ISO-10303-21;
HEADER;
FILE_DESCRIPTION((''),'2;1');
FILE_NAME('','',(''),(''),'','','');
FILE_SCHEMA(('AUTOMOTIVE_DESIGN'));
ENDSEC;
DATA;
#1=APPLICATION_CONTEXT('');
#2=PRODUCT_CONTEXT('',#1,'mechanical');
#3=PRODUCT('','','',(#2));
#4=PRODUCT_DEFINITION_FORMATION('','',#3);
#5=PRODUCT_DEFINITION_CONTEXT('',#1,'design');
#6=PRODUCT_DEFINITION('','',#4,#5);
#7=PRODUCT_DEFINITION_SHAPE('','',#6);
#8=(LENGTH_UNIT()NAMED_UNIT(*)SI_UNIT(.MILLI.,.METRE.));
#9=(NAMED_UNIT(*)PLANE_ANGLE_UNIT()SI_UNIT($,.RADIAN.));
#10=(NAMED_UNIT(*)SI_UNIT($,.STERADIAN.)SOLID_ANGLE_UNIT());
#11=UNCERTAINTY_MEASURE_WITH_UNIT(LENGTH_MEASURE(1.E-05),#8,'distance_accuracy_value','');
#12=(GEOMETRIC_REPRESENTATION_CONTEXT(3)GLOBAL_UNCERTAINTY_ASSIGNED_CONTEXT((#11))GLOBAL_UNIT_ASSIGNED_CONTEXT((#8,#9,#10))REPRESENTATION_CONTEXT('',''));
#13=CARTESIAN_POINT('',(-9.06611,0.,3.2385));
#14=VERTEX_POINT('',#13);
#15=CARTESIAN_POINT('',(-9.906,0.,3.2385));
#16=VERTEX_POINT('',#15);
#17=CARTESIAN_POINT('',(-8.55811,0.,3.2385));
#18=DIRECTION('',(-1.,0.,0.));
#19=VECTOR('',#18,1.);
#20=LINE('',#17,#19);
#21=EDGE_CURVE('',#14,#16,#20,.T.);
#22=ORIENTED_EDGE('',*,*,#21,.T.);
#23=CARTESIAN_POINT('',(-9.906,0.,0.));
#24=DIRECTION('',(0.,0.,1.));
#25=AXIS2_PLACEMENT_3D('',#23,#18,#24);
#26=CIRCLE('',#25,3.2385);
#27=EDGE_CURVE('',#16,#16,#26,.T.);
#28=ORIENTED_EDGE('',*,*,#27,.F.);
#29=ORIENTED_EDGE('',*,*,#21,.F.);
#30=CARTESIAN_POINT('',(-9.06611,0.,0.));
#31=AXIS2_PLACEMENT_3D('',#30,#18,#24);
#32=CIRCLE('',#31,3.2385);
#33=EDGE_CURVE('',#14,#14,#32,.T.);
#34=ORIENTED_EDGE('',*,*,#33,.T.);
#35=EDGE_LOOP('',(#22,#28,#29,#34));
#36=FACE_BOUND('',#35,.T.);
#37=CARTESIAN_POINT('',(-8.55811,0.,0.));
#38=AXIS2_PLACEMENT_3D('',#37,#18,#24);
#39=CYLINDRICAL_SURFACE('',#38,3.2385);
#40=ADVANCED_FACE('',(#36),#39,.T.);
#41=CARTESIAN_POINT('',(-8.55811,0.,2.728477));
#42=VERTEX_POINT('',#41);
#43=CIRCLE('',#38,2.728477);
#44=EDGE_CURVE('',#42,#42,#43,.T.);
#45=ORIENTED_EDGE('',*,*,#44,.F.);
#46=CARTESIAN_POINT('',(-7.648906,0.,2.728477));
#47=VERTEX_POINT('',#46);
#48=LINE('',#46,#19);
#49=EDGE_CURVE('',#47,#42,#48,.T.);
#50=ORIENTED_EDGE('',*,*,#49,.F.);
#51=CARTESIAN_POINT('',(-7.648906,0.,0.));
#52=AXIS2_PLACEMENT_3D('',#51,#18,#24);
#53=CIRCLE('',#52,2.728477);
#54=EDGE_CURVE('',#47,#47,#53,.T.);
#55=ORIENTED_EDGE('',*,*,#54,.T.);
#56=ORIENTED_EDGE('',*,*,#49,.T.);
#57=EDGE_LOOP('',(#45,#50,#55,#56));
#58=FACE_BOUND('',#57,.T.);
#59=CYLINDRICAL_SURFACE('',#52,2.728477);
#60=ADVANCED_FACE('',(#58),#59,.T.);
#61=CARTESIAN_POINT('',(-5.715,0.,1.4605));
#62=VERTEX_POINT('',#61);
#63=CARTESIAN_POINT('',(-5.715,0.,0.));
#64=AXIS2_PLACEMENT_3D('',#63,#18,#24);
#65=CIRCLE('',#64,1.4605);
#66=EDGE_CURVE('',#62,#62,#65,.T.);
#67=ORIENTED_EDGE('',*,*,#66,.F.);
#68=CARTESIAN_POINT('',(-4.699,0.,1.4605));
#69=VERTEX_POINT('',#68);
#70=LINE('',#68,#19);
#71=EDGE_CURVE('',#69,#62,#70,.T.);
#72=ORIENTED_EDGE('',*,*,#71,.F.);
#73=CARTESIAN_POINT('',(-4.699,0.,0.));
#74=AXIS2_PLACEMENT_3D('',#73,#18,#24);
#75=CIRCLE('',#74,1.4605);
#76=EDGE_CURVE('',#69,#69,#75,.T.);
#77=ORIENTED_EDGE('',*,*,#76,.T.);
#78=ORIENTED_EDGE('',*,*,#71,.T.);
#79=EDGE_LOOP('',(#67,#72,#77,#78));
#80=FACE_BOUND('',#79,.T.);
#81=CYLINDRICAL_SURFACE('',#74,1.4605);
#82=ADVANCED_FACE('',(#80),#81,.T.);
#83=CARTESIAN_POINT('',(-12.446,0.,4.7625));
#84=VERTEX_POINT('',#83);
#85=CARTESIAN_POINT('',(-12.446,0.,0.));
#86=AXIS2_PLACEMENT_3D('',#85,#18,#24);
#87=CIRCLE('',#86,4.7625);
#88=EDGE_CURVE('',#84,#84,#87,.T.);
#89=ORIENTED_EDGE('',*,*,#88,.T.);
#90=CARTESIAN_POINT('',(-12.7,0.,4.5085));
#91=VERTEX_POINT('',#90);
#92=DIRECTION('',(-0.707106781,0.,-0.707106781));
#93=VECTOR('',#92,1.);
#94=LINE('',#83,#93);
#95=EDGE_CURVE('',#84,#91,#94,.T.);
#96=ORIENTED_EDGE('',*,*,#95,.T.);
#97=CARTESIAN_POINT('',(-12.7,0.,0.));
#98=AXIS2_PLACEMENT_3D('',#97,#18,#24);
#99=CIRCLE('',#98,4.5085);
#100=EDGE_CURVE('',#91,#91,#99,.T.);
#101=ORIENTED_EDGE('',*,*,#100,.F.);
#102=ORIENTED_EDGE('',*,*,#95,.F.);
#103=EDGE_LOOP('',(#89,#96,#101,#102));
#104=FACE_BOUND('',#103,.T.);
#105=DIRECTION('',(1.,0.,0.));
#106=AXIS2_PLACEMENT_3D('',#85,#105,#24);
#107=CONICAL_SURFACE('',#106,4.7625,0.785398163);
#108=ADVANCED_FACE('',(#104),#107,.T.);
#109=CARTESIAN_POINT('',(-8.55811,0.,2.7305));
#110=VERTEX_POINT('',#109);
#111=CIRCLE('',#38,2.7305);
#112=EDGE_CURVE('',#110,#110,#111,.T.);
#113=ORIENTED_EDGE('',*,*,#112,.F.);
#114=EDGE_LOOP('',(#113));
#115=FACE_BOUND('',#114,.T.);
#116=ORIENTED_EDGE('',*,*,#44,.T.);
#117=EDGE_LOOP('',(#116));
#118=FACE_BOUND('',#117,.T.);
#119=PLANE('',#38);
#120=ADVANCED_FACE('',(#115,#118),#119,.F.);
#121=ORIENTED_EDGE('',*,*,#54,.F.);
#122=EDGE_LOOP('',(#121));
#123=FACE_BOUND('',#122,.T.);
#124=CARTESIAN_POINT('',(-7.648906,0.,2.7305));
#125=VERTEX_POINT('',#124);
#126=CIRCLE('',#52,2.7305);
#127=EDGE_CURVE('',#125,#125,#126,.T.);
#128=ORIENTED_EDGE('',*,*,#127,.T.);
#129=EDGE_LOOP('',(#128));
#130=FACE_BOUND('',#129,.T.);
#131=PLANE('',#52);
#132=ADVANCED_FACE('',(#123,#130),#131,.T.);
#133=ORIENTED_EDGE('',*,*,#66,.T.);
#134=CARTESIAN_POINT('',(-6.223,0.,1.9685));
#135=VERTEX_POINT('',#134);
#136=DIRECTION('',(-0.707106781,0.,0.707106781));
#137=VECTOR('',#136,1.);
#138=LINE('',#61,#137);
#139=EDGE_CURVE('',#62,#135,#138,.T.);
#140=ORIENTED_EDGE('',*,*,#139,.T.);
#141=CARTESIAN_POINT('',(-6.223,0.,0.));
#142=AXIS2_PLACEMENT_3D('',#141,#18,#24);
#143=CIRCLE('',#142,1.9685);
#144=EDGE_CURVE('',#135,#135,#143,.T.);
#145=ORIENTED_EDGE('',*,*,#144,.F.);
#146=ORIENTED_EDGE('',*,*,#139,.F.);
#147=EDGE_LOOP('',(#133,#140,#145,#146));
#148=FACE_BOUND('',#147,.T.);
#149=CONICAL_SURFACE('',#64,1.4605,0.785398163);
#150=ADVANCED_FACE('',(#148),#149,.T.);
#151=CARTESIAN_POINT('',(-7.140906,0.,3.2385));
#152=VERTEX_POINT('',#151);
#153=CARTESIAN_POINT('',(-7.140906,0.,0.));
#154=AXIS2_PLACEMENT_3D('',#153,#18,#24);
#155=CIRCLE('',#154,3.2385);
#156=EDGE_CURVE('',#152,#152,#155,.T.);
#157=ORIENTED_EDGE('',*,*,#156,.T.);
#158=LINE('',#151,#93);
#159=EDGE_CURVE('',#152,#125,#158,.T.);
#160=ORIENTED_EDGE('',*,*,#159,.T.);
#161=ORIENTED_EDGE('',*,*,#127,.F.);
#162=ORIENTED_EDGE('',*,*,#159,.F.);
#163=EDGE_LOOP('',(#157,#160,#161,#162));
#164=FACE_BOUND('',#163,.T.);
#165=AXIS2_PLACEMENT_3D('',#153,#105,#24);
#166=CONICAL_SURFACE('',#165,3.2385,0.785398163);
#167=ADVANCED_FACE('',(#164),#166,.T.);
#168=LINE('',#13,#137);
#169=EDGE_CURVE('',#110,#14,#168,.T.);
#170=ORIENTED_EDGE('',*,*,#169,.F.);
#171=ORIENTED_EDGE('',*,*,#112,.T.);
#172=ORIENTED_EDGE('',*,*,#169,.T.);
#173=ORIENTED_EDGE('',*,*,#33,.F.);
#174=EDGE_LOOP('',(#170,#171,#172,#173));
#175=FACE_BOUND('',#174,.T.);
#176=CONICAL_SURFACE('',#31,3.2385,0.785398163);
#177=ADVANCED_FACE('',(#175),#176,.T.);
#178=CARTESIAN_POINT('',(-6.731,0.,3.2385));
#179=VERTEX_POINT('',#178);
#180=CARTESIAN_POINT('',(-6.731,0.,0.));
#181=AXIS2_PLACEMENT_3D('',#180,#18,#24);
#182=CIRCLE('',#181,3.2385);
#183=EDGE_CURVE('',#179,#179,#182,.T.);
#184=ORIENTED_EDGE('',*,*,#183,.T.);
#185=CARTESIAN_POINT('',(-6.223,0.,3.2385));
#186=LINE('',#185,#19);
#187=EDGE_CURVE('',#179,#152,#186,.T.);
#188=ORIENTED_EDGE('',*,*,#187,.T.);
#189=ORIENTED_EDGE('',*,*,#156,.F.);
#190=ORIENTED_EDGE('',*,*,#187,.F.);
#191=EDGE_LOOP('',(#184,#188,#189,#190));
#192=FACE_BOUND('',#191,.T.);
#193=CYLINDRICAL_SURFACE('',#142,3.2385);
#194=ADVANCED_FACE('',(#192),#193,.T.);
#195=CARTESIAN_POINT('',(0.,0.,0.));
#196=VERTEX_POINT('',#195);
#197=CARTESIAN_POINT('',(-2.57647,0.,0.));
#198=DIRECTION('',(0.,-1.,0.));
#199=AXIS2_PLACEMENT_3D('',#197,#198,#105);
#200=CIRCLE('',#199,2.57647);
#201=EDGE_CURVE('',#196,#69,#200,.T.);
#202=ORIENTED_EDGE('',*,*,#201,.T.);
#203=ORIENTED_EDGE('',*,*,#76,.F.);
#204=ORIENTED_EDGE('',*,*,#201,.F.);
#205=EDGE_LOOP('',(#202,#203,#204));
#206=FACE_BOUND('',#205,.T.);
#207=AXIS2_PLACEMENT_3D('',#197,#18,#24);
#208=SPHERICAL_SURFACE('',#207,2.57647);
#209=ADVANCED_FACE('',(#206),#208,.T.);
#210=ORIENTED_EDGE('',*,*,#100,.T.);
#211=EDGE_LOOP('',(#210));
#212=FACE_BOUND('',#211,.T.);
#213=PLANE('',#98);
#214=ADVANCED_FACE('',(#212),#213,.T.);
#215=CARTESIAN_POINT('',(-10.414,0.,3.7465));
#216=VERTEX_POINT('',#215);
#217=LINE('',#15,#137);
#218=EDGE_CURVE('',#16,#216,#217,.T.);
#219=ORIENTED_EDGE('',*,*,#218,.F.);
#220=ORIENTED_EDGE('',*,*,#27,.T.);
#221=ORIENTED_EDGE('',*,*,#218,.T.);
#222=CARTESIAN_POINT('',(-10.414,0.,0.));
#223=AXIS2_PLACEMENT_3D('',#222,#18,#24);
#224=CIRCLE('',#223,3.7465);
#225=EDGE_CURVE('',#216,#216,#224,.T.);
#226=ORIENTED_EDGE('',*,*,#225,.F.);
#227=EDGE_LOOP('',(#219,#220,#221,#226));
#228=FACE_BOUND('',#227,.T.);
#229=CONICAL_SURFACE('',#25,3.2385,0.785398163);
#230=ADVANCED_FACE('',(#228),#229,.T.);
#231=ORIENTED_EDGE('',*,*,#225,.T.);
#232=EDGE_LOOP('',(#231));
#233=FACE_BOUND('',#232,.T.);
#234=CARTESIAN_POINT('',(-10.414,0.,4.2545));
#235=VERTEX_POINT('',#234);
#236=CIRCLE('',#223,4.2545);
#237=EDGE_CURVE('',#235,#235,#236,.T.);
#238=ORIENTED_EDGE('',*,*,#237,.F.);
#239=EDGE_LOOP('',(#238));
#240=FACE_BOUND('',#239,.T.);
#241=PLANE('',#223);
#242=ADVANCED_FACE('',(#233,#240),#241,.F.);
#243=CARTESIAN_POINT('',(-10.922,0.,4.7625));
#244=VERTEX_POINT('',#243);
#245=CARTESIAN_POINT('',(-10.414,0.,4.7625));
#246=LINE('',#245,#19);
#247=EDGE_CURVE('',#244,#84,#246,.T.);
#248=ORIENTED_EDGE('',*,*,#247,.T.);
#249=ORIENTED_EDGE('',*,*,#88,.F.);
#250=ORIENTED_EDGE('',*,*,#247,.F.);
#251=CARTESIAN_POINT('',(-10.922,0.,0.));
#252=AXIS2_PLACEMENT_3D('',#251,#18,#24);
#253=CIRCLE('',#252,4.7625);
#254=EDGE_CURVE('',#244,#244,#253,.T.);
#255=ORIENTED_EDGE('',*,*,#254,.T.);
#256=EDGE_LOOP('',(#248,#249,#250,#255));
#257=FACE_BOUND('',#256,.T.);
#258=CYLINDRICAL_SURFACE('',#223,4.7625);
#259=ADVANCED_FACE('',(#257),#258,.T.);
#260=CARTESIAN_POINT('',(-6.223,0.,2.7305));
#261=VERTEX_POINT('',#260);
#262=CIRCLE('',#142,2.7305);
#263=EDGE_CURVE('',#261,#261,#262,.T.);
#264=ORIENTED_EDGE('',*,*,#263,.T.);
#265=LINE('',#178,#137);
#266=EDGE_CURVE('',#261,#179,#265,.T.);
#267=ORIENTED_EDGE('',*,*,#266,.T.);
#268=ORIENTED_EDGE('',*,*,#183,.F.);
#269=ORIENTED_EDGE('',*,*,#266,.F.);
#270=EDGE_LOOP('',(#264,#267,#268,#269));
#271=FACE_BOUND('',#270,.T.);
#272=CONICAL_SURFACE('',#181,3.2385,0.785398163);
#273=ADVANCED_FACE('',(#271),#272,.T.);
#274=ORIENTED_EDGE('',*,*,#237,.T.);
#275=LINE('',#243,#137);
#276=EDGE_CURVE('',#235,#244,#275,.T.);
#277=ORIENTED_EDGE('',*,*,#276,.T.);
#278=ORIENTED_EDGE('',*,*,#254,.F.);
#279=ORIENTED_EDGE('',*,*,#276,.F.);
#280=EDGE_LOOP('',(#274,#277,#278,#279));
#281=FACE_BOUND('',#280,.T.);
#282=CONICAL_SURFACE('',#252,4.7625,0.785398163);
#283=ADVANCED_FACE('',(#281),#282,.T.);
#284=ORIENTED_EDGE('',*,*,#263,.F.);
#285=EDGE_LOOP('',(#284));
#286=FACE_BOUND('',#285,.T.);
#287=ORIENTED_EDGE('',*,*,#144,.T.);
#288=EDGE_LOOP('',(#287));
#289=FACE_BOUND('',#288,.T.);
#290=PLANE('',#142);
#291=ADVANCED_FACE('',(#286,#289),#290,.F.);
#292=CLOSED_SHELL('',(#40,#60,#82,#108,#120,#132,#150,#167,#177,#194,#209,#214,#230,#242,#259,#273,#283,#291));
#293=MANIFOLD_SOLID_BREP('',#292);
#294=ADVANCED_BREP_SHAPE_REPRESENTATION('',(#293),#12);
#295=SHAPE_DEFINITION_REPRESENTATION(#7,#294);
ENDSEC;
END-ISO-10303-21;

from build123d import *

# Parameters (mm, degrees)
F2_SIZE = 0.508
F3_SIZE = 0.254


with BuildPart() as f1:
    # F0 (on Front) → F1 (revolve)
    with BuildSketch(Plane.XZ):
        with BuildLine():
            Line((-12.7, 0), (0, 0))
            ThreePointArc((0, 0), (-1.81176033, 2.4603689383), (-4.699, 1.4605))
            Line((-4.699, 1.4605), (-6.223, 1.4605))
            Line((-6.223, 1.4605), (-6.223, 3.2385))
            Line((-6.223, 3.2385), (-7.6489057392, 3.2385))
            Line((-7.6489057392, 3.2385), (-7.6489057392, 2.7284773532))
            Line((-7.6489057392, 2.7284773532), (-8.558110334, 2.7284773532))
            Line((-8.558110334, 2.7284773532), (-8.558110334, 3.2385))
            Line((-8.558110334, 3.2385), (-10.414, 3.2385))
            Line((-10.414, 3.2385), (-10.414, 4.7625))
            Line((-10.414, 4.7625), (-12.7, 4.7625))
            Line((-12.7, 4.7625), (-12.7, 0))
        make_face()
    revolve(axis=Axis((-6.35, 0, 0), (-1, 0, 0)))

    # F2
    f2_edges = [f1.edges().sort_by_distance(p)[0] for p in [
        (-10.414, 0, -4.7625),
        (-7.648906, 0, -3.2385),
        (-6.223, 0, -1.4605),
        (-6.223, 0, -3.2385),
        (-8.55811, 0, -3.2385),
        (-10.414, 0, -3.2385),
    ]]
    chamfer(f2_edges, length=F2_SIZE)

    # F3
    f3_edges = [f1.edges().sort_by_distance(p)[0] for p in [
        (-12.7, 0, -4.7625),
    ]]
    chamfer(f3_edges, length=F3_SIZE)


solid = f1.part
